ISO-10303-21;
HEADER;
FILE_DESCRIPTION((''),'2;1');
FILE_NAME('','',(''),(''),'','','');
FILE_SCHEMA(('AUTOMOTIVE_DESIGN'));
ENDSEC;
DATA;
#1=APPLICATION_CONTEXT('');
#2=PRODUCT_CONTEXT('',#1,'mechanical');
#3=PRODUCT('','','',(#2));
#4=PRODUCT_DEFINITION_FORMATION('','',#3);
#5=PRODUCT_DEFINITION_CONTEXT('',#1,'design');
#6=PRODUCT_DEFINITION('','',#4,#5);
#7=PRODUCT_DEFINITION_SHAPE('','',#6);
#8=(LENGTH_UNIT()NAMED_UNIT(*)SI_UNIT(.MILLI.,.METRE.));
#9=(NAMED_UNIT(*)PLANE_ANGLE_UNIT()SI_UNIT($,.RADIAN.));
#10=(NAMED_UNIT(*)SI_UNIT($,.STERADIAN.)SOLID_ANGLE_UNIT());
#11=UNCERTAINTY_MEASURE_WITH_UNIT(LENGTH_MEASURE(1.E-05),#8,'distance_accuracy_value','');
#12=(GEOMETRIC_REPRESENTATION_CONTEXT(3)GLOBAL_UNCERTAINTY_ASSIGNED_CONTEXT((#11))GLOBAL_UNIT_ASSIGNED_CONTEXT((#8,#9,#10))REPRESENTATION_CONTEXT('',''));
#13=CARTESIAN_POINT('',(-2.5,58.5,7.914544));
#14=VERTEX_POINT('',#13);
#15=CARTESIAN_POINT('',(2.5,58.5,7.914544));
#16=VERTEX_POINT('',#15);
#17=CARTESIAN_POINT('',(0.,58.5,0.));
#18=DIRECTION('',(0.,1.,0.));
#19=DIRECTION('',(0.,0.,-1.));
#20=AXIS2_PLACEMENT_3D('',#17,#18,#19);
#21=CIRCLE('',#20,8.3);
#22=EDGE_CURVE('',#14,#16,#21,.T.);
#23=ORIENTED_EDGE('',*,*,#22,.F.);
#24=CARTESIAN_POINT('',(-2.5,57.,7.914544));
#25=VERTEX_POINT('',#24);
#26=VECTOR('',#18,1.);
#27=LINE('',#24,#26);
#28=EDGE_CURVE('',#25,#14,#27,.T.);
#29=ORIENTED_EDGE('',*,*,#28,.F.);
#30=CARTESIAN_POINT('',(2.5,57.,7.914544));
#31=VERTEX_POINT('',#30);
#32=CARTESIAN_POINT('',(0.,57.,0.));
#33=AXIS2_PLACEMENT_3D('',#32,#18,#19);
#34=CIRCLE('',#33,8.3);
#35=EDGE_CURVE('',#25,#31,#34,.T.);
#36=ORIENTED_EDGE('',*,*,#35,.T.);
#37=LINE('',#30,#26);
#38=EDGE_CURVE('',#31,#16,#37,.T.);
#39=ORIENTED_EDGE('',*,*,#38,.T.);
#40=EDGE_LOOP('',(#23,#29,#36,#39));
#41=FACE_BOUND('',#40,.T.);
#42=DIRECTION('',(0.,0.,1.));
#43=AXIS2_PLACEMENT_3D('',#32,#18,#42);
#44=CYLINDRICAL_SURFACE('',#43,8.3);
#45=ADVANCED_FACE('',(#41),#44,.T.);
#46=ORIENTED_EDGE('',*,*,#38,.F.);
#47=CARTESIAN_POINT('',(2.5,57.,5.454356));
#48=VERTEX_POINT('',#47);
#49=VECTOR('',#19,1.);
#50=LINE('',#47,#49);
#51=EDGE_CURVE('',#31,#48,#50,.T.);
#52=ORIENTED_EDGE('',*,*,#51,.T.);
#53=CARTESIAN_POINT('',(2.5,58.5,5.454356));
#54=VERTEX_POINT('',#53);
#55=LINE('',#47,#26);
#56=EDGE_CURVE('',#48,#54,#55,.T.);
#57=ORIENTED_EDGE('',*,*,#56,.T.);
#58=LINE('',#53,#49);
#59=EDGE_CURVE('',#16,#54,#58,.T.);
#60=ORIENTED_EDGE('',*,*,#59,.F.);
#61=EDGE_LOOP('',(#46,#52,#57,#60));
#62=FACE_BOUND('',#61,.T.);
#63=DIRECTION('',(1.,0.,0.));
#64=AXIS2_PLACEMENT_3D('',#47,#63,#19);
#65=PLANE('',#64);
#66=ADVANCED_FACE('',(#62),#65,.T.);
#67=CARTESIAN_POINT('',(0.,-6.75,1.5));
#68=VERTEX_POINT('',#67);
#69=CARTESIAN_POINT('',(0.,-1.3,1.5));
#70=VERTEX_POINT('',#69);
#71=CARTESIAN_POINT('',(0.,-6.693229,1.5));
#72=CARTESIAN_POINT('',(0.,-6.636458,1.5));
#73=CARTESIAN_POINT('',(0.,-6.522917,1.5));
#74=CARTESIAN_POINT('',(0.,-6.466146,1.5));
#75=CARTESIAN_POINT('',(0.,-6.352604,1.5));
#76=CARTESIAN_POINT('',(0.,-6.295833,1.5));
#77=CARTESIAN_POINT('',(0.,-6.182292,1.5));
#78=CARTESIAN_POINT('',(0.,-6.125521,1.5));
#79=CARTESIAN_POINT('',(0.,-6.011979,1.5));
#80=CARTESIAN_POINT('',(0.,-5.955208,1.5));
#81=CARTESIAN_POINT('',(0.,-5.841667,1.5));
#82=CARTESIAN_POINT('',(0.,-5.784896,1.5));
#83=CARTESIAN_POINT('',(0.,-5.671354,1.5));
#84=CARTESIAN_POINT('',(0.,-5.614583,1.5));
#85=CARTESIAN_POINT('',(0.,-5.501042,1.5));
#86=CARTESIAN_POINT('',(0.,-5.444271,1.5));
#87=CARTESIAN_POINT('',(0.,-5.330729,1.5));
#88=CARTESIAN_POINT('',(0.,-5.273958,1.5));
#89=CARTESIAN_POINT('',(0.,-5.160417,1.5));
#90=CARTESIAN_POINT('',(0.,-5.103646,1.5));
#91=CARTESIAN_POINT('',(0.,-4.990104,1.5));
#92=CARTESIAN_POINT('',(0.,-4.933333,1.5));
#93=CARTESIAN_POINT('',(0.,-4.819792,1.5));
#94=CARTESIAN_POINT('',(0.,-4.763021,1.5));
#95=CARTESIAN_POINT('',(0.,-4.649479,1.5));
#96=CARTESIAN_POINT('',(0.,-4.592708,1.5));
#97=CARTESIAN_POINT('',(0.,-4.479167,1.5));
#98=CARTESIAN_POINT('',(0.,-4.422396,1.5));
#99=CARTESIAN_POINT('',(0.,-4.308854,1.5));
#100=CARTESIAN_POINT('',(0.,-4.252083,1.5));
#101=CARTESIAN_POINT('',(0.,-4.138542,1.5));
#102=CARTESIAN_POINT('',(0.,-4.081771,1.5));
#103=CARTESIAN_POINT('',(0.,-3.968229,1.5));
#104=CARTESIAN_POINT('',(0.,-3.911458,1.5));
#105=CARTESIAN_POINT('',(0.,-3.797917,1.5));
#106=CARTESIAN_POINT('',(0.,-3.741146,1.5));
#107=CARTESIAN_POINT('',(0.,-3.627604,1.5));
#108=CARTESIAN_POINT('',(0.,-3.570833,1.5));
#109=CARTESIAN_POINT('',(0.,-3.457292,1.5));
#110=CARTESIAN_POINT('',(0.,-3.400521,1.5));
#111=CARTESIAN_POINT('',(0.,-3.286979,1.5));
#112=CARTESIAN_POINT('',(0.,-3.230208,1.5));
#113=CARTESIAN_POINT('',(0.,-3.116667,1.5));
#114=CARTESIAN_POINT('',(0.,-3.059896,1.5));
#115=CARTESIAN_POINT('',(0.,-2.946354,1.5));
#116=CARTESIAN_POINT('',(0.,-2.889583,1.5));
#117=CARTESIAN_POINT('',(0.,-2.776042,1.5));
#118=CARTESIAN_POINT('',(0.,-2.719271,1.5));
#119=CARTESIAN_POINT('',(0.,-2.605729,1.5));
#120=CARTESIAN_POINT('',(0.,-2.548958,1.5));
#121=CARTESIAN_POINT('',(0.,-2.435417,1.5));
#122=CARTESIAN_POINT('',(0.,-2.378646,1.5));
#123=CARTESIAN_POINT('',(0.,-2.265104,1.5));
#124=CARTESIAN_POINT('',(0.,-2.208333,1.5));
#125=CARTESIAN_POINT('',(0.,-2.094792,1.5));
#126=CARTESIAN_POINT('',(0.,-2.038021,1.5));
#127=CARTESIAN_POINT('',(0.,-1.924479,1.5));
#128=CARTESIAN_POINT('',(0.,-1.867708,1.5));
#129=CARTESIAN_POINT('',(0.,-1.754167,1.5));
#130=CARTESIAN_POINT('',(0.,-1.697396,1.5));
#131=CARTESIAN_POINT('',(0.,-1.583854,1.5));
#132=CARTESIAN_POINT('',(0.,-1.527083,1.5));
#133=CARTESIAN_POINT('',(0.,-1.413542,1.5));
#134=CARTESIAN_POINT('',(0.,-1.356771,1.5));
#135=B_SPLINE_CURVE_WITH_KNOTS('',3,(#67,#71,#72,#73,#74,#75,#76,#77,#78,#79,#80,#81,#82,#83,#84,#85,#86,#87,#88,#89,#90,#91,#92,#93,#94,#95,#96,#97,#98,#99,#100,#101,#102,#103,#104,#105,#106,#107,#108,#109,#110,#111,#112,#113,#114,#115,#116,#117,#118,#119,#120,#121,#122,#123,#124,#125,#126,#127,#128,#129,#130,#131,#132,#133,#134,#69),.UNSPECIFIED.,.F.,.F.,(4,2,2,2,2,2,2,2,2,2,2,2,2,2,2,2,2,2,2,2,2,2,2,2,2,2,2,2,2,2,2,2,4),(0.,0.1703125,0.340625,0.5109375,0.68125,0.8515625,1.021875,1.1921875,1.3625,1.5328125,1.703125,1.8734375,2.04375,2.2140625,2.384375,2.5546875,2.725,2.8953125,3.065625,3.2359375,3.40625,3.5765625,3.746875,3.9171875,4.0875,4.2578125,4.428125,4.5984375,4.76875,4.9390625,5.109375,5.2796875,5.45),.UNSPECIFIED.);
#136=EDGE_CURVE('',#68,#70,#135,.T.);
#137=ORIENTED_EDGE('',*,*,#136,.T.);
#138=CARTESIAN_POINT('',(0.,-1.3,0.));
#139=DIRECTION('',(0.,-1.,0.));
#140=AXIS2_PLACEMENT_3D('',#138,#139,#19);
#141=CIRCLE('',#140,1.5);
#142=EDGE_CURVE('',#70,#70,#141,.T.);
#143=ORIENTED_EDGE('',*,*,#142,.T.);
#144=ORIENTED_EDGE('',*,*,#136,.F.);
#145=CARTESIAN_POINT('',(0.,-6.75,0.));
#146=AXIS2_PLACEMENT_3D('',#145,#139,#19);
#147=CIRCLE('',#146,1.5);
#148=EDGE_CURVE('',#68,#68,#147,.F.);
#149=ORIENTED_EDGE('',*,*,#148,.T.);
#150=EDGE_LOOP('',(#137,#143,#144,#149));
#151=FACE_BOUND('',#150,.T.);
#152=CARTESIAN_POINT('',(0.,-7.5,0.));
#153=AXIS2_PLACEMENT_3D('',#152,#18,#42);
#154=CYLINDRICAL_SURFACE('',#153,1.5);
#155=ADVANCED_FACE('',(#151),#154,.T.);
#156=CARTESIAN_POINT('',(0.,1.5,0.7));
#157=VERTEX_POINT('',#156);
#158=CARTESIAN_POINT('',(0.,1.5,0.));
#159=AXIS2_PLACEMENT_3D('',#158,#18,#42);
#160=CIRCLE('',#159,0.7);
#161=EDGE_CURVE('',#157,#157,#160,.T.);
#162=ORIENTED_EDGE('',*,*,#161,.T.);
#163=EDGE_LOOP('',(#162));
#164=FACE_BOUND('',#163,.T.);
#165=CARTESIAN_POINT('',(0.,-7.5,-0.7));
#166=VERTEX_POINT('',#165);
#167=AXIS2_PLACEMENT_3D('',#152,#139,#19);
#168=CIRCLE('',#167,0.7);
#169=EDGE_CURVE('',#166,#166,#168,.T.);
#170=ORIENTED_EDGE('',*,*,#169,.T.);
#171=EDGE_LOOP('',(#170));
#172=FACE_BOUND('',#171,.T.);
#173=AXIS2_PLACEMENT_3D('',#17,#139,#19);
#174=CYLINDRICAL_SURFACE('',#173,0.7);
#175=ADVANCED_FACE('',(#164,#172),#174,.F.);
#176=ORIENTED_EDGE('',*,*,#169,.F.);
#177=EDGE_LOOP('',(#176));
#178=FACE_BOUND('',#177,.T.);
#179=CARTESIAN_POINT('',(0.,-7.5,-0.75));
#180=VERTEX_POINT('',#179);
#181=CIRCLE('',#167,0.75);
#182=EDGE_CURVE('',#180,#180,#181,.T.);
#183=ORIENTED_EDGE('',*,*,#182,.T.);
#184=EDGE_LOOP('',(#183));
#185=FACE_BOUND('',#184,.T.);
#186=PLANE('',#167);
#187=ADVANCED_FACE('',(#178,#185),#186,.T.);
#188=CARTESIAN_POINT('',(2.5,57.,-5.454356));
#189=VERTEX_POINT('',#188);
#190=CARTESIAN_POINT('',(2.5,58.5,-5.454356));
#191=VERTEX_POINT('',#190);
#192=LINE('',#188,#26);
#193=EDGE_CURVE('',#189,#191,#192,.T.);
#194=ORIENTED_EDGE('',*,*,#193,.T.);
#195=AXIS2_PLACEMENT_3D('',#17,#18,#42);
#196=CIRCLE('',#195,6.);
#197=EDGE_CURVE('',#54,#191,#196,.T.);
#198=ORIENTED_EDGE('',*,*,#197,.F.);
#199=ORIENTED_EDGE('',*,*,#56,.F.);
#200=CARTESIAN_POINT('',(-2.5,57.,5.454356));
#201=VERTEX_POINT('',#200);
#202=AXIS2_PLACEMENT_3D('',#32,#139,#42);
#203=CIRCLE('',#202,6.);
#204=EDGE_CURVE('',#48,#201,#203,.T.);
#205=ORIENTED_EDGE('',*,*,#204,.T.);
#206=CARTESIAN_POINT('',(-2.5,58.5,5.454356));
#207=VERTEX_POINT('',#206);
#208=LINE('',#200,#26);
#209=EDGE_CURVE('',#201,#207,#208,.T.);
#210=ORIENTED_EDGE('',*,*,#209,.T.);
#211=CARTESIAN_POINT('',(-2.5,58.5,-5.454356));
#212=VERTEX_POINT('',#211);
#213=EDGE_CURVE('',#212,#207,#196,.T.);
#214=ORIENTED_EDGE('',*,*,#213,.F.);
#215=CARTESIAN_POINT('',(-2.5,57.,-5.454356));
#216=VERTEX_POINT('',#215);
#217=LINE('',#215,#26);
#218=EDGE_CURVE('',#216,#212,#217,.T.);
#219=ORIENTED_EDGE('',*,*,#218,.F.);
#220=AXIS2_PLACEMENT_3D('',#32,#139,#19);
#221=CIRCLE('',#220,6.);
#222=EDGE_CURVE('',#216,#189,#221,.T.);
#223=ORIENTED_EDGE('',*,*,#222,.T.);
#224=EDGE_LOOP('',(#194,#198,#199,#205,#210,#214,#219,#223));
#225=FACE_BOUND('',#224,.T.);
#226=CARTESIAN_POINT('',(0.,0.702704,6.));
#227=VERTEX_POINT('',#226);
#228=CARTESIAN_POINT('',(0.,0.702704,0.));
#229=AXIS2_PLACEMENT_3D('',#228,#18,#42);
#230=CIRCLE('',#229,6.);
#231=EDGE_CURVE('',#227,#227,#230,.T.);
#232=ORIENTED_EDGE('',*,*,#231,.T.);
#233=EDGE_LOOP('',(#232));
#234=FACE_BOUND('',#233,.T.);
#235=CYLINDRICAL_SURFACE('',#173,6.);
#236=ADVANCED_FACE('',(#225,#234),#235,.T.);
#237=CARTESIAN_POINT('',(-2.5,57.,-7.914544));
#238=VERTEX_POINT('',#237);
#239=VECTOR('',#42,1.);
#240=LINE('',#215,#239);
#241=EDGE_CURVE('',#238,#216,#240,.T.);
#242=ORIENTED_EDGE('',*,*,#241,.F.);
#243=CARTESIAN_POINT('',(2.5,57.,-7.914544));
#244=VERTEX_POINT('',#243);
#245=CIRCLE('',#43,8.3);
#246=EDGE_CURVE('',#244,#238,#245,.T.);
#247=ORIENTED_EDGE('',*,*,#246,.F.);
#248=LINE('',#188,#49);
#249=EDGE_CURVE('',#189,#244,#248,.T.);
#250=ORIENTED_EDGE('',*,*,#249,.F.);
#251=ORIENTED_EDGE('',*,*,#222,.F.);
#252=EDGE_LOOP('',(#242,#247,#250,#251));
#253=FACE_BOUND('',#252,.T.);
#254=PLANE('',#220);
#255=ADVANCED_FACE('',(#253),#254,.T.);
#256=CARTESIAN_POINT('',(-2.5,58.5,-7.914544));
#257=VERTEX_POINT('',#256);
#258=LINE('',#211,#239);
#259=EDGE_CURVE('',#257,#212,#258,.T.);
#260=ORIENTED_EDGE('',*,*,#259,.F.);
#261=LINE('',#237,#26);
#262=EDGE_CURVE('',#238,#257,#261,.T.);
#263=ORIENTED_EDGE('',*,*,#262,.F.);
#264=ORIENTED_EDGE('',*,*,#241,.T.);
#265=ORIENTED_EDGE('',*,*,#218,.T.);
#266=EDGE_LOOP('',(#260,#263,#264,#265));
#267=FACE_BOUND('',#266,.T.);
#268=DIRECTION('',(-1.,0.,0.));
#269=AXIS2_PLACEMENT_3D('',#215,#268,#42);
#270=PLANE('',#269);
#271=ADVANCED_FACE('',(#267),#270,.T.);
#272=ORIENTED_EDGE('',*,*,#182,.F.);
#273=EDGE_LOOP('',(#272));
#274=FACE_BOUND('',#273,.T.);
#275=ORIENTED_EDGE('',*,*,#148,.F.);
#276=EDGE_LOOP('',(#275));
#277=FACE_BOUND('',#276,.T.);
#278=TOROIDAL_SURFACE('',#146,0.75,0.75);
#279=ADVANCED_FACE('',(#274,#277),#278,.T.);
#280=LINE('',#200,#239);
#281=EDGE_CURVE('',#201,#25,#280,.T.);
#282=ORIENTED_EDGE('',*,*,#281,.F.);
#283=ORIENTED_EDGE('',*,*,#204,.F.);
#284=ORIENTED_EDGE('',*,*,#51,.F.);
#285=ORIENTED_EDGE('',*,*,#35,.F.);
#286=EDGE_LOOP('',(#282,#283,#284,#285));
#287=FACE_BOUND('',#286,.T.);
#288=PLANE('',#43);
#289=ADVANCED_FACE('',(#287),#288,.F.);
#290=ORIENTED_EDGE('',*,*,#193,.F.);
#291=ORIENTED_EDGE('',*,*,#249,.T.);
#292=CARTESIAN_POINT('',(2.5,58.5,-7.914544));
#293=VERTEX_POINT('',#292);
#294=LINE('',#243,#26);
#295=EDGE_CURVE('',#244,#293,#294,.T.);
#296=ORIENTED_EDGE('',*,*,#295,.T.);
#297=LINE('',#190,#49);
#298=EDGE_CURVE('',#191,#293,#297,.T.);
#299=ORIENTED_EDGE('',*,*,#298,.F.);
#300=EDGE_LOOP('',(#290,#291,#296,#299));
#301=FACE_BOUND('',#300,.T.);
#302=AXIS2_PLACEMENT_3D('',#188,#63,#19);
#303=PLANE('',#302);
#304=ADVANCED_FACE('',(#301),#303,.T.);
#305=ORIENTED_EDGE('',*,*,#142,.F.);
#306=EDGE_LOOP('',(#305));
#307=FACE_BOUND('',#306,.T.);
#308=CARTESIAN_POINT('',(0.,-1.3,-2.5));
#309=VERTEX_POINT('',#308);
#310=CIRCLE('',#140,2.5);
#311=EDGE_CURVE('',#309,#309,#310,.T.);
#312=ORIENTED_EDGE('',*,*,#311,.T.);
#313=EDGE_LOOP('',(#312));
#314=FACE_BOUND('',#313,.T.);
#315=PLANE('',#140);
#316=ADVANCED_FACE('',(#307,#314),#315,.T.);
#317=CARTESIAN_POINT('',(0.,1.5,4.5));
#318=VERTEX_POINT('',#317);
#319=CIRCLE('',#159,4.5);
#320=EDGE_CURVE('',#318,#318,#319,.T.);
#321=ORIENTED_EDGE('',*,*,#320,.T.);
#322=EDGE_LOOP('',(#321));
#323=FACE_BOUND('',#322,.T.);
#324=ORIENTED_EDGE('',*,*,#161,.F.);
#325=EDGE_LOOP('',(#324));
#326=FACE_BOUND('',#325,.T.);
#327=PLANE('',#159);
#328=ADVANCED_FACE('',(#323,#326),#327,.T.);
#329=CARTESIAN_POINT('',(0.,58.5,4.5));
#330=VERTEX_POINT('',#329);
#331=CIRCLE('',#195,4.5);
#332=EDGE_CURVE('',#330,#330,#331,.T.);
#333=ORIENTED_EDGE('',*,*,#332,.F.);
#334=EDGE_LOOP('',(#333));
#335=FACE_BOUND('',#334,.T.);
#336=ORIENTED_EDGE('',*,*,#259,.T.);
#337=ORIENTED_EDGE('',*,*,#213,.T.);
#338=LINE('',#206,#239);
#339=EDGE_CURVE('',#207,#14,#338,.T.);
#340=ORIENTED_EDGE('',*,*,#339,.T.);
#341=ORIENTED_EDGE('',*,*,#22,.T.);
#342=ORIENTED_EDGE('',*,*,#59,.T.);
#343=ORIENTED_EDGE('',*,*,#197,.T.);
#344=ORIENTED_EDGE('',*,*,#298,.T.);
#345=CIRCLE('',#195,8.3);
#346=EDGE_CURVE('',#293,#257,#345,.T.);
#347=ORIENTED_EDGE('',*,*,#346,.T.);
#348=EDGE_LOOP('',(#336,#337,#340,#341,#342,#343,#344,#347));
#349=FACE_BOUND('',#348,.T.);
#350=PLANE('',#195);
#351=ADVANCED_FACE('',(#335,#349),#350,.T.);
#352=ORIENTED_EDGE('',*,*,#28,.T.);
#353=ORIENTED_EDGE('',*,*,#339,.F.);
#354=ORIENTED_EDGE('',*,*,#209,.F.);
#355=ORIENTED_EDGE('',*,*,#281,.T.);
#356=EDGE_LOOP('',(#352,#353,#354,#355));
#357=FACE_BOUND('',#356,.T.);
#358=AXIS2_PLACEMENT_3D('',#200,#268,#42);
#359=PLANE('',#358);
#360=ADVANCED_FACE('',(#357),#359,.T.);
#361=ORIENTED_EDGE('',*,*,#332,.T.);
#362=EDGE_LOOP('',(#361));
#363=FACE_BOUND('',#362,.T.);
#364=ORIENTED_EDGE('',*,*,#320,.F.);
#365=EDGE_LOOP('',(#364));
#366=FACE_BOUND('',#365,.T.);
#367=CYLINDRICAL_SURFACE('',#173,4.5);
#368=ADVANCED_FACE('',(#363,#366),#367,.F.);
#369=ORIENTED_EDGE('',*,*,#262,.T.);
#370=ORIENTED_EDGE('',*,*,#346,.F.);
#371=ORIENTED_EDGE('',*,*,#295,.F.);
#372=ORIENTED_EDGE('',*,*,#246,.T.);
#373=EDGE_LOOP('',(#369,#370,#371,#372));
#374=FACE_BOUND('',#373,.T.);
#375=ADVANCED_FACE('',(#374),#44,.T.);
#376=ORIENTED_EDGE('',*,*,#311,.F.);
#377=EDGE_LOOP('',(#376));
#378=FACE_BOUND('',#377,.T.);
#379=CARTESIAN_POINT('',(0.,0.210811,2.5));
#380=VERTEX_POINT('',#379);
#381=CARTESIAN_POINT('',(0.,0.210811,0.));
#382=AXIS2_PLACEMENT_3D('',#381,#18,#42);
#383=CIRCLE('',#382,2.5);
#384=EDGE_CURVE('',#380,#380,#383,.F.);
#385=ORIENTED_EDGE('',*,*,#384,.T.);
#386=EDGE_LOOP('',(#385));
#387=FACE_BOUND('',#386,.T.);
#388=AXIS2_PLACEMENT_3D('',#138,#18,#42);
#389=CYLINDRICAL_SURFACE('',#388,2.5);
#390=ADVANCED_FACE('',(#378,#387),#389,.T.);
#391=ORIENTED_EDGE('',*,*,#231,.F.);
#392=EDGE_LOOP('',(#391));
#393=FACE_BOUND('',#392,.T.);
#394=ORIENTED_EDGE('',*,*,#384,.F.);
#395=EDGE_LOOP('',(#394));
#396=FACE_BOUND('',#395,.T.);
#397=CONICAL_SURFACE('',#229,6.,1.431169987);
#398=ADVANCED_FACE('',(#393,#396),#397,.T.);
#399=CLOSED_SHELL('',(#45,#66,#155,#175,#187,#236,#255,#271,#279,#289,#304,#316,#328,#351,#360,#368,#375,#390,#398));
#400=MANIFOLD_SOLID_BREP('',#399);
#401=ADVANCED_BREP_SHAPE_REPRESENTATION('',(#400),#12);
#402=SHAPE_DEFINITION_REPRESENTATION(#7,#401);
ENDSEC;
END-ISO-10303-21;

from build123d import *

# Parameters (mm, degrees)
SKETCH1_R           = 6
BOSS_EXTRUDE1_DEPTH = 58.5
SHELL1_T            = -1.5
SKETCH3_R           = 2.5
BOSS_EXTRUDE2_DEPTH = 1.3
SKETCH4_R           = 1.5
BOSS_EXTRUDE3_DEPTH = 6.2
SKETCH5_R           = 0.7
CUT_EXTRUDE1_DEPTH  = 67.543219038
FILLET1_R           = 0.75
CHAMFER1_SIZE       = 5
CHAMFER1_SIZE_2     = 0.702704174
BOSS_EXTRUDE4_START = -1.5
BOSS_EXTRUDE4_DEPTH = 1.5


with BuildPart() as part:
    # Sketch1 → Boss-Extrude1 (new body)
    with BuildSketch(Plane(origin=(0, 0, 0), x_dir=(1, 0, 0), z_dir=(0, 1, 0))):
        with Locations(Location((0, 0, 0), (0, 0, 270))):
            Circle(SKETCH1_R)
    extrude(amount=BOSS_EXTRUDE1_DEPTH)

    # Shell1
    shell1_openings = [part.faces().sort_by_distance(p)[0] for p in [
        (0, 58.5, 0),
    ]]
    offset(amount=SHELL1_T, openings=shell1_openings, kind=Kind.INTERSECTION)

    # Sketch3 → Boss-Extrude2 (add)
    with BuildSketch(Plane.XZ):
        with Locations(Location((0, 0, 0), (0, 0, 270))):
            Circle(SKETCH3_R)
    extrude(amount=BOSS_EXTRUDE2_DEPTH)

    # Sketch4 → Boss-Extrude3 (add)
    with BuildSketch(Plane.XZ.offset(1.3)):
        with Locations(Location((0, 0, 0), (0, 0, 90))):
            Circle(SKETCH4_R)
    extrude(amount=BOSS_EXTRUDE3_DEPTH)

    # Sketch5 → Cut-Extrude1 (cut, through all)
    with BuildSketch(Plane.XZ.offset(7.5)):
        with Locations(Location((0, 0, 0), (0, 0, 270))):
            Circle(SKETCH5_R)
    extrude(amount=-CUT_EXTRUDE1_DEPTH, mode=Mode.SUBTRACT)

    # Fillet1
    fillet1_edges = [part.edges().sort_by_distance(p)[0] for p in [
        (0, -7.5, -1.5),
    ]]
    fillet(fillet1_edges, radius=FILLET1_R)

    # Chamfer1
    # the kernel refuses this chamfer: 5, 0.702704174 mm, written as the material it takes off along each edge
    with BuildSketch(Plane(origin=(0, 0, 0), x_dir=(0, 0, 1), z_dir=(-1, 0, 0))) as chamfer1_piece_1_section:
        Polygon((6 - CHAMFER1_SIZE, 0), (6, CHAMFER1_SIZE_2), (6, 0), align=None)
    chamfer1_piece_1 = revolve(axis=Axis((0, 0, 0), (0, 1, 0)), mode=Mode.PRIVATE)
    chamfer1_piece_1 = chamfer1_piece_1 - Plane(origin=(0, 0.432162163, 0), x_dir=(0, 0, -1), z_dir=(0, 1, 0)) * Cylinder(2.5, 24, mode=Mode.PRIVATE)
    add(chamfer1_piece_1, mode=Mode.SUBTRACT)

    # Sketch6 → Boss-Extrude4 (add)
    with BuildSketch(Plane(origin=(0, 58.5, 0), x_dir=(1, 0, 0), z_dir=(0, 1, 0)).offset(BOSS_EXTRUDE4_START)):
        with BuildLine():
            Line((2.5, 5.454356057), (2.5, 7.914543575))
            ThreePointArc((2.5, 7.914543575), (0, 8.3), (-2.5, 7.914543575))
            Line((-2.5, 7.914543575), (-2.5, 5.454356057))
            ThreePointArc((-2.5, 5.454356057), (0, 6), (2.5, 5.454356057))
        make_face()
        with BuildLine():
            Line((-2.5, -5.454356057), (-2.5, -7.914543575))
            ThreePointArc((-2.5, -7.914543575), (0, -8.3), (2.5, -7.914543575))
            Line((2.5, -7.914543575), (2.5, -5.454356057))
            ThreePointArc((2.5, -5.454356057), (0, -6), (-2.5, -5.454356057))
        make_face()
    extrude(amount=BOSS_EXTRUDE4_DEPTH)


solid = part.part
